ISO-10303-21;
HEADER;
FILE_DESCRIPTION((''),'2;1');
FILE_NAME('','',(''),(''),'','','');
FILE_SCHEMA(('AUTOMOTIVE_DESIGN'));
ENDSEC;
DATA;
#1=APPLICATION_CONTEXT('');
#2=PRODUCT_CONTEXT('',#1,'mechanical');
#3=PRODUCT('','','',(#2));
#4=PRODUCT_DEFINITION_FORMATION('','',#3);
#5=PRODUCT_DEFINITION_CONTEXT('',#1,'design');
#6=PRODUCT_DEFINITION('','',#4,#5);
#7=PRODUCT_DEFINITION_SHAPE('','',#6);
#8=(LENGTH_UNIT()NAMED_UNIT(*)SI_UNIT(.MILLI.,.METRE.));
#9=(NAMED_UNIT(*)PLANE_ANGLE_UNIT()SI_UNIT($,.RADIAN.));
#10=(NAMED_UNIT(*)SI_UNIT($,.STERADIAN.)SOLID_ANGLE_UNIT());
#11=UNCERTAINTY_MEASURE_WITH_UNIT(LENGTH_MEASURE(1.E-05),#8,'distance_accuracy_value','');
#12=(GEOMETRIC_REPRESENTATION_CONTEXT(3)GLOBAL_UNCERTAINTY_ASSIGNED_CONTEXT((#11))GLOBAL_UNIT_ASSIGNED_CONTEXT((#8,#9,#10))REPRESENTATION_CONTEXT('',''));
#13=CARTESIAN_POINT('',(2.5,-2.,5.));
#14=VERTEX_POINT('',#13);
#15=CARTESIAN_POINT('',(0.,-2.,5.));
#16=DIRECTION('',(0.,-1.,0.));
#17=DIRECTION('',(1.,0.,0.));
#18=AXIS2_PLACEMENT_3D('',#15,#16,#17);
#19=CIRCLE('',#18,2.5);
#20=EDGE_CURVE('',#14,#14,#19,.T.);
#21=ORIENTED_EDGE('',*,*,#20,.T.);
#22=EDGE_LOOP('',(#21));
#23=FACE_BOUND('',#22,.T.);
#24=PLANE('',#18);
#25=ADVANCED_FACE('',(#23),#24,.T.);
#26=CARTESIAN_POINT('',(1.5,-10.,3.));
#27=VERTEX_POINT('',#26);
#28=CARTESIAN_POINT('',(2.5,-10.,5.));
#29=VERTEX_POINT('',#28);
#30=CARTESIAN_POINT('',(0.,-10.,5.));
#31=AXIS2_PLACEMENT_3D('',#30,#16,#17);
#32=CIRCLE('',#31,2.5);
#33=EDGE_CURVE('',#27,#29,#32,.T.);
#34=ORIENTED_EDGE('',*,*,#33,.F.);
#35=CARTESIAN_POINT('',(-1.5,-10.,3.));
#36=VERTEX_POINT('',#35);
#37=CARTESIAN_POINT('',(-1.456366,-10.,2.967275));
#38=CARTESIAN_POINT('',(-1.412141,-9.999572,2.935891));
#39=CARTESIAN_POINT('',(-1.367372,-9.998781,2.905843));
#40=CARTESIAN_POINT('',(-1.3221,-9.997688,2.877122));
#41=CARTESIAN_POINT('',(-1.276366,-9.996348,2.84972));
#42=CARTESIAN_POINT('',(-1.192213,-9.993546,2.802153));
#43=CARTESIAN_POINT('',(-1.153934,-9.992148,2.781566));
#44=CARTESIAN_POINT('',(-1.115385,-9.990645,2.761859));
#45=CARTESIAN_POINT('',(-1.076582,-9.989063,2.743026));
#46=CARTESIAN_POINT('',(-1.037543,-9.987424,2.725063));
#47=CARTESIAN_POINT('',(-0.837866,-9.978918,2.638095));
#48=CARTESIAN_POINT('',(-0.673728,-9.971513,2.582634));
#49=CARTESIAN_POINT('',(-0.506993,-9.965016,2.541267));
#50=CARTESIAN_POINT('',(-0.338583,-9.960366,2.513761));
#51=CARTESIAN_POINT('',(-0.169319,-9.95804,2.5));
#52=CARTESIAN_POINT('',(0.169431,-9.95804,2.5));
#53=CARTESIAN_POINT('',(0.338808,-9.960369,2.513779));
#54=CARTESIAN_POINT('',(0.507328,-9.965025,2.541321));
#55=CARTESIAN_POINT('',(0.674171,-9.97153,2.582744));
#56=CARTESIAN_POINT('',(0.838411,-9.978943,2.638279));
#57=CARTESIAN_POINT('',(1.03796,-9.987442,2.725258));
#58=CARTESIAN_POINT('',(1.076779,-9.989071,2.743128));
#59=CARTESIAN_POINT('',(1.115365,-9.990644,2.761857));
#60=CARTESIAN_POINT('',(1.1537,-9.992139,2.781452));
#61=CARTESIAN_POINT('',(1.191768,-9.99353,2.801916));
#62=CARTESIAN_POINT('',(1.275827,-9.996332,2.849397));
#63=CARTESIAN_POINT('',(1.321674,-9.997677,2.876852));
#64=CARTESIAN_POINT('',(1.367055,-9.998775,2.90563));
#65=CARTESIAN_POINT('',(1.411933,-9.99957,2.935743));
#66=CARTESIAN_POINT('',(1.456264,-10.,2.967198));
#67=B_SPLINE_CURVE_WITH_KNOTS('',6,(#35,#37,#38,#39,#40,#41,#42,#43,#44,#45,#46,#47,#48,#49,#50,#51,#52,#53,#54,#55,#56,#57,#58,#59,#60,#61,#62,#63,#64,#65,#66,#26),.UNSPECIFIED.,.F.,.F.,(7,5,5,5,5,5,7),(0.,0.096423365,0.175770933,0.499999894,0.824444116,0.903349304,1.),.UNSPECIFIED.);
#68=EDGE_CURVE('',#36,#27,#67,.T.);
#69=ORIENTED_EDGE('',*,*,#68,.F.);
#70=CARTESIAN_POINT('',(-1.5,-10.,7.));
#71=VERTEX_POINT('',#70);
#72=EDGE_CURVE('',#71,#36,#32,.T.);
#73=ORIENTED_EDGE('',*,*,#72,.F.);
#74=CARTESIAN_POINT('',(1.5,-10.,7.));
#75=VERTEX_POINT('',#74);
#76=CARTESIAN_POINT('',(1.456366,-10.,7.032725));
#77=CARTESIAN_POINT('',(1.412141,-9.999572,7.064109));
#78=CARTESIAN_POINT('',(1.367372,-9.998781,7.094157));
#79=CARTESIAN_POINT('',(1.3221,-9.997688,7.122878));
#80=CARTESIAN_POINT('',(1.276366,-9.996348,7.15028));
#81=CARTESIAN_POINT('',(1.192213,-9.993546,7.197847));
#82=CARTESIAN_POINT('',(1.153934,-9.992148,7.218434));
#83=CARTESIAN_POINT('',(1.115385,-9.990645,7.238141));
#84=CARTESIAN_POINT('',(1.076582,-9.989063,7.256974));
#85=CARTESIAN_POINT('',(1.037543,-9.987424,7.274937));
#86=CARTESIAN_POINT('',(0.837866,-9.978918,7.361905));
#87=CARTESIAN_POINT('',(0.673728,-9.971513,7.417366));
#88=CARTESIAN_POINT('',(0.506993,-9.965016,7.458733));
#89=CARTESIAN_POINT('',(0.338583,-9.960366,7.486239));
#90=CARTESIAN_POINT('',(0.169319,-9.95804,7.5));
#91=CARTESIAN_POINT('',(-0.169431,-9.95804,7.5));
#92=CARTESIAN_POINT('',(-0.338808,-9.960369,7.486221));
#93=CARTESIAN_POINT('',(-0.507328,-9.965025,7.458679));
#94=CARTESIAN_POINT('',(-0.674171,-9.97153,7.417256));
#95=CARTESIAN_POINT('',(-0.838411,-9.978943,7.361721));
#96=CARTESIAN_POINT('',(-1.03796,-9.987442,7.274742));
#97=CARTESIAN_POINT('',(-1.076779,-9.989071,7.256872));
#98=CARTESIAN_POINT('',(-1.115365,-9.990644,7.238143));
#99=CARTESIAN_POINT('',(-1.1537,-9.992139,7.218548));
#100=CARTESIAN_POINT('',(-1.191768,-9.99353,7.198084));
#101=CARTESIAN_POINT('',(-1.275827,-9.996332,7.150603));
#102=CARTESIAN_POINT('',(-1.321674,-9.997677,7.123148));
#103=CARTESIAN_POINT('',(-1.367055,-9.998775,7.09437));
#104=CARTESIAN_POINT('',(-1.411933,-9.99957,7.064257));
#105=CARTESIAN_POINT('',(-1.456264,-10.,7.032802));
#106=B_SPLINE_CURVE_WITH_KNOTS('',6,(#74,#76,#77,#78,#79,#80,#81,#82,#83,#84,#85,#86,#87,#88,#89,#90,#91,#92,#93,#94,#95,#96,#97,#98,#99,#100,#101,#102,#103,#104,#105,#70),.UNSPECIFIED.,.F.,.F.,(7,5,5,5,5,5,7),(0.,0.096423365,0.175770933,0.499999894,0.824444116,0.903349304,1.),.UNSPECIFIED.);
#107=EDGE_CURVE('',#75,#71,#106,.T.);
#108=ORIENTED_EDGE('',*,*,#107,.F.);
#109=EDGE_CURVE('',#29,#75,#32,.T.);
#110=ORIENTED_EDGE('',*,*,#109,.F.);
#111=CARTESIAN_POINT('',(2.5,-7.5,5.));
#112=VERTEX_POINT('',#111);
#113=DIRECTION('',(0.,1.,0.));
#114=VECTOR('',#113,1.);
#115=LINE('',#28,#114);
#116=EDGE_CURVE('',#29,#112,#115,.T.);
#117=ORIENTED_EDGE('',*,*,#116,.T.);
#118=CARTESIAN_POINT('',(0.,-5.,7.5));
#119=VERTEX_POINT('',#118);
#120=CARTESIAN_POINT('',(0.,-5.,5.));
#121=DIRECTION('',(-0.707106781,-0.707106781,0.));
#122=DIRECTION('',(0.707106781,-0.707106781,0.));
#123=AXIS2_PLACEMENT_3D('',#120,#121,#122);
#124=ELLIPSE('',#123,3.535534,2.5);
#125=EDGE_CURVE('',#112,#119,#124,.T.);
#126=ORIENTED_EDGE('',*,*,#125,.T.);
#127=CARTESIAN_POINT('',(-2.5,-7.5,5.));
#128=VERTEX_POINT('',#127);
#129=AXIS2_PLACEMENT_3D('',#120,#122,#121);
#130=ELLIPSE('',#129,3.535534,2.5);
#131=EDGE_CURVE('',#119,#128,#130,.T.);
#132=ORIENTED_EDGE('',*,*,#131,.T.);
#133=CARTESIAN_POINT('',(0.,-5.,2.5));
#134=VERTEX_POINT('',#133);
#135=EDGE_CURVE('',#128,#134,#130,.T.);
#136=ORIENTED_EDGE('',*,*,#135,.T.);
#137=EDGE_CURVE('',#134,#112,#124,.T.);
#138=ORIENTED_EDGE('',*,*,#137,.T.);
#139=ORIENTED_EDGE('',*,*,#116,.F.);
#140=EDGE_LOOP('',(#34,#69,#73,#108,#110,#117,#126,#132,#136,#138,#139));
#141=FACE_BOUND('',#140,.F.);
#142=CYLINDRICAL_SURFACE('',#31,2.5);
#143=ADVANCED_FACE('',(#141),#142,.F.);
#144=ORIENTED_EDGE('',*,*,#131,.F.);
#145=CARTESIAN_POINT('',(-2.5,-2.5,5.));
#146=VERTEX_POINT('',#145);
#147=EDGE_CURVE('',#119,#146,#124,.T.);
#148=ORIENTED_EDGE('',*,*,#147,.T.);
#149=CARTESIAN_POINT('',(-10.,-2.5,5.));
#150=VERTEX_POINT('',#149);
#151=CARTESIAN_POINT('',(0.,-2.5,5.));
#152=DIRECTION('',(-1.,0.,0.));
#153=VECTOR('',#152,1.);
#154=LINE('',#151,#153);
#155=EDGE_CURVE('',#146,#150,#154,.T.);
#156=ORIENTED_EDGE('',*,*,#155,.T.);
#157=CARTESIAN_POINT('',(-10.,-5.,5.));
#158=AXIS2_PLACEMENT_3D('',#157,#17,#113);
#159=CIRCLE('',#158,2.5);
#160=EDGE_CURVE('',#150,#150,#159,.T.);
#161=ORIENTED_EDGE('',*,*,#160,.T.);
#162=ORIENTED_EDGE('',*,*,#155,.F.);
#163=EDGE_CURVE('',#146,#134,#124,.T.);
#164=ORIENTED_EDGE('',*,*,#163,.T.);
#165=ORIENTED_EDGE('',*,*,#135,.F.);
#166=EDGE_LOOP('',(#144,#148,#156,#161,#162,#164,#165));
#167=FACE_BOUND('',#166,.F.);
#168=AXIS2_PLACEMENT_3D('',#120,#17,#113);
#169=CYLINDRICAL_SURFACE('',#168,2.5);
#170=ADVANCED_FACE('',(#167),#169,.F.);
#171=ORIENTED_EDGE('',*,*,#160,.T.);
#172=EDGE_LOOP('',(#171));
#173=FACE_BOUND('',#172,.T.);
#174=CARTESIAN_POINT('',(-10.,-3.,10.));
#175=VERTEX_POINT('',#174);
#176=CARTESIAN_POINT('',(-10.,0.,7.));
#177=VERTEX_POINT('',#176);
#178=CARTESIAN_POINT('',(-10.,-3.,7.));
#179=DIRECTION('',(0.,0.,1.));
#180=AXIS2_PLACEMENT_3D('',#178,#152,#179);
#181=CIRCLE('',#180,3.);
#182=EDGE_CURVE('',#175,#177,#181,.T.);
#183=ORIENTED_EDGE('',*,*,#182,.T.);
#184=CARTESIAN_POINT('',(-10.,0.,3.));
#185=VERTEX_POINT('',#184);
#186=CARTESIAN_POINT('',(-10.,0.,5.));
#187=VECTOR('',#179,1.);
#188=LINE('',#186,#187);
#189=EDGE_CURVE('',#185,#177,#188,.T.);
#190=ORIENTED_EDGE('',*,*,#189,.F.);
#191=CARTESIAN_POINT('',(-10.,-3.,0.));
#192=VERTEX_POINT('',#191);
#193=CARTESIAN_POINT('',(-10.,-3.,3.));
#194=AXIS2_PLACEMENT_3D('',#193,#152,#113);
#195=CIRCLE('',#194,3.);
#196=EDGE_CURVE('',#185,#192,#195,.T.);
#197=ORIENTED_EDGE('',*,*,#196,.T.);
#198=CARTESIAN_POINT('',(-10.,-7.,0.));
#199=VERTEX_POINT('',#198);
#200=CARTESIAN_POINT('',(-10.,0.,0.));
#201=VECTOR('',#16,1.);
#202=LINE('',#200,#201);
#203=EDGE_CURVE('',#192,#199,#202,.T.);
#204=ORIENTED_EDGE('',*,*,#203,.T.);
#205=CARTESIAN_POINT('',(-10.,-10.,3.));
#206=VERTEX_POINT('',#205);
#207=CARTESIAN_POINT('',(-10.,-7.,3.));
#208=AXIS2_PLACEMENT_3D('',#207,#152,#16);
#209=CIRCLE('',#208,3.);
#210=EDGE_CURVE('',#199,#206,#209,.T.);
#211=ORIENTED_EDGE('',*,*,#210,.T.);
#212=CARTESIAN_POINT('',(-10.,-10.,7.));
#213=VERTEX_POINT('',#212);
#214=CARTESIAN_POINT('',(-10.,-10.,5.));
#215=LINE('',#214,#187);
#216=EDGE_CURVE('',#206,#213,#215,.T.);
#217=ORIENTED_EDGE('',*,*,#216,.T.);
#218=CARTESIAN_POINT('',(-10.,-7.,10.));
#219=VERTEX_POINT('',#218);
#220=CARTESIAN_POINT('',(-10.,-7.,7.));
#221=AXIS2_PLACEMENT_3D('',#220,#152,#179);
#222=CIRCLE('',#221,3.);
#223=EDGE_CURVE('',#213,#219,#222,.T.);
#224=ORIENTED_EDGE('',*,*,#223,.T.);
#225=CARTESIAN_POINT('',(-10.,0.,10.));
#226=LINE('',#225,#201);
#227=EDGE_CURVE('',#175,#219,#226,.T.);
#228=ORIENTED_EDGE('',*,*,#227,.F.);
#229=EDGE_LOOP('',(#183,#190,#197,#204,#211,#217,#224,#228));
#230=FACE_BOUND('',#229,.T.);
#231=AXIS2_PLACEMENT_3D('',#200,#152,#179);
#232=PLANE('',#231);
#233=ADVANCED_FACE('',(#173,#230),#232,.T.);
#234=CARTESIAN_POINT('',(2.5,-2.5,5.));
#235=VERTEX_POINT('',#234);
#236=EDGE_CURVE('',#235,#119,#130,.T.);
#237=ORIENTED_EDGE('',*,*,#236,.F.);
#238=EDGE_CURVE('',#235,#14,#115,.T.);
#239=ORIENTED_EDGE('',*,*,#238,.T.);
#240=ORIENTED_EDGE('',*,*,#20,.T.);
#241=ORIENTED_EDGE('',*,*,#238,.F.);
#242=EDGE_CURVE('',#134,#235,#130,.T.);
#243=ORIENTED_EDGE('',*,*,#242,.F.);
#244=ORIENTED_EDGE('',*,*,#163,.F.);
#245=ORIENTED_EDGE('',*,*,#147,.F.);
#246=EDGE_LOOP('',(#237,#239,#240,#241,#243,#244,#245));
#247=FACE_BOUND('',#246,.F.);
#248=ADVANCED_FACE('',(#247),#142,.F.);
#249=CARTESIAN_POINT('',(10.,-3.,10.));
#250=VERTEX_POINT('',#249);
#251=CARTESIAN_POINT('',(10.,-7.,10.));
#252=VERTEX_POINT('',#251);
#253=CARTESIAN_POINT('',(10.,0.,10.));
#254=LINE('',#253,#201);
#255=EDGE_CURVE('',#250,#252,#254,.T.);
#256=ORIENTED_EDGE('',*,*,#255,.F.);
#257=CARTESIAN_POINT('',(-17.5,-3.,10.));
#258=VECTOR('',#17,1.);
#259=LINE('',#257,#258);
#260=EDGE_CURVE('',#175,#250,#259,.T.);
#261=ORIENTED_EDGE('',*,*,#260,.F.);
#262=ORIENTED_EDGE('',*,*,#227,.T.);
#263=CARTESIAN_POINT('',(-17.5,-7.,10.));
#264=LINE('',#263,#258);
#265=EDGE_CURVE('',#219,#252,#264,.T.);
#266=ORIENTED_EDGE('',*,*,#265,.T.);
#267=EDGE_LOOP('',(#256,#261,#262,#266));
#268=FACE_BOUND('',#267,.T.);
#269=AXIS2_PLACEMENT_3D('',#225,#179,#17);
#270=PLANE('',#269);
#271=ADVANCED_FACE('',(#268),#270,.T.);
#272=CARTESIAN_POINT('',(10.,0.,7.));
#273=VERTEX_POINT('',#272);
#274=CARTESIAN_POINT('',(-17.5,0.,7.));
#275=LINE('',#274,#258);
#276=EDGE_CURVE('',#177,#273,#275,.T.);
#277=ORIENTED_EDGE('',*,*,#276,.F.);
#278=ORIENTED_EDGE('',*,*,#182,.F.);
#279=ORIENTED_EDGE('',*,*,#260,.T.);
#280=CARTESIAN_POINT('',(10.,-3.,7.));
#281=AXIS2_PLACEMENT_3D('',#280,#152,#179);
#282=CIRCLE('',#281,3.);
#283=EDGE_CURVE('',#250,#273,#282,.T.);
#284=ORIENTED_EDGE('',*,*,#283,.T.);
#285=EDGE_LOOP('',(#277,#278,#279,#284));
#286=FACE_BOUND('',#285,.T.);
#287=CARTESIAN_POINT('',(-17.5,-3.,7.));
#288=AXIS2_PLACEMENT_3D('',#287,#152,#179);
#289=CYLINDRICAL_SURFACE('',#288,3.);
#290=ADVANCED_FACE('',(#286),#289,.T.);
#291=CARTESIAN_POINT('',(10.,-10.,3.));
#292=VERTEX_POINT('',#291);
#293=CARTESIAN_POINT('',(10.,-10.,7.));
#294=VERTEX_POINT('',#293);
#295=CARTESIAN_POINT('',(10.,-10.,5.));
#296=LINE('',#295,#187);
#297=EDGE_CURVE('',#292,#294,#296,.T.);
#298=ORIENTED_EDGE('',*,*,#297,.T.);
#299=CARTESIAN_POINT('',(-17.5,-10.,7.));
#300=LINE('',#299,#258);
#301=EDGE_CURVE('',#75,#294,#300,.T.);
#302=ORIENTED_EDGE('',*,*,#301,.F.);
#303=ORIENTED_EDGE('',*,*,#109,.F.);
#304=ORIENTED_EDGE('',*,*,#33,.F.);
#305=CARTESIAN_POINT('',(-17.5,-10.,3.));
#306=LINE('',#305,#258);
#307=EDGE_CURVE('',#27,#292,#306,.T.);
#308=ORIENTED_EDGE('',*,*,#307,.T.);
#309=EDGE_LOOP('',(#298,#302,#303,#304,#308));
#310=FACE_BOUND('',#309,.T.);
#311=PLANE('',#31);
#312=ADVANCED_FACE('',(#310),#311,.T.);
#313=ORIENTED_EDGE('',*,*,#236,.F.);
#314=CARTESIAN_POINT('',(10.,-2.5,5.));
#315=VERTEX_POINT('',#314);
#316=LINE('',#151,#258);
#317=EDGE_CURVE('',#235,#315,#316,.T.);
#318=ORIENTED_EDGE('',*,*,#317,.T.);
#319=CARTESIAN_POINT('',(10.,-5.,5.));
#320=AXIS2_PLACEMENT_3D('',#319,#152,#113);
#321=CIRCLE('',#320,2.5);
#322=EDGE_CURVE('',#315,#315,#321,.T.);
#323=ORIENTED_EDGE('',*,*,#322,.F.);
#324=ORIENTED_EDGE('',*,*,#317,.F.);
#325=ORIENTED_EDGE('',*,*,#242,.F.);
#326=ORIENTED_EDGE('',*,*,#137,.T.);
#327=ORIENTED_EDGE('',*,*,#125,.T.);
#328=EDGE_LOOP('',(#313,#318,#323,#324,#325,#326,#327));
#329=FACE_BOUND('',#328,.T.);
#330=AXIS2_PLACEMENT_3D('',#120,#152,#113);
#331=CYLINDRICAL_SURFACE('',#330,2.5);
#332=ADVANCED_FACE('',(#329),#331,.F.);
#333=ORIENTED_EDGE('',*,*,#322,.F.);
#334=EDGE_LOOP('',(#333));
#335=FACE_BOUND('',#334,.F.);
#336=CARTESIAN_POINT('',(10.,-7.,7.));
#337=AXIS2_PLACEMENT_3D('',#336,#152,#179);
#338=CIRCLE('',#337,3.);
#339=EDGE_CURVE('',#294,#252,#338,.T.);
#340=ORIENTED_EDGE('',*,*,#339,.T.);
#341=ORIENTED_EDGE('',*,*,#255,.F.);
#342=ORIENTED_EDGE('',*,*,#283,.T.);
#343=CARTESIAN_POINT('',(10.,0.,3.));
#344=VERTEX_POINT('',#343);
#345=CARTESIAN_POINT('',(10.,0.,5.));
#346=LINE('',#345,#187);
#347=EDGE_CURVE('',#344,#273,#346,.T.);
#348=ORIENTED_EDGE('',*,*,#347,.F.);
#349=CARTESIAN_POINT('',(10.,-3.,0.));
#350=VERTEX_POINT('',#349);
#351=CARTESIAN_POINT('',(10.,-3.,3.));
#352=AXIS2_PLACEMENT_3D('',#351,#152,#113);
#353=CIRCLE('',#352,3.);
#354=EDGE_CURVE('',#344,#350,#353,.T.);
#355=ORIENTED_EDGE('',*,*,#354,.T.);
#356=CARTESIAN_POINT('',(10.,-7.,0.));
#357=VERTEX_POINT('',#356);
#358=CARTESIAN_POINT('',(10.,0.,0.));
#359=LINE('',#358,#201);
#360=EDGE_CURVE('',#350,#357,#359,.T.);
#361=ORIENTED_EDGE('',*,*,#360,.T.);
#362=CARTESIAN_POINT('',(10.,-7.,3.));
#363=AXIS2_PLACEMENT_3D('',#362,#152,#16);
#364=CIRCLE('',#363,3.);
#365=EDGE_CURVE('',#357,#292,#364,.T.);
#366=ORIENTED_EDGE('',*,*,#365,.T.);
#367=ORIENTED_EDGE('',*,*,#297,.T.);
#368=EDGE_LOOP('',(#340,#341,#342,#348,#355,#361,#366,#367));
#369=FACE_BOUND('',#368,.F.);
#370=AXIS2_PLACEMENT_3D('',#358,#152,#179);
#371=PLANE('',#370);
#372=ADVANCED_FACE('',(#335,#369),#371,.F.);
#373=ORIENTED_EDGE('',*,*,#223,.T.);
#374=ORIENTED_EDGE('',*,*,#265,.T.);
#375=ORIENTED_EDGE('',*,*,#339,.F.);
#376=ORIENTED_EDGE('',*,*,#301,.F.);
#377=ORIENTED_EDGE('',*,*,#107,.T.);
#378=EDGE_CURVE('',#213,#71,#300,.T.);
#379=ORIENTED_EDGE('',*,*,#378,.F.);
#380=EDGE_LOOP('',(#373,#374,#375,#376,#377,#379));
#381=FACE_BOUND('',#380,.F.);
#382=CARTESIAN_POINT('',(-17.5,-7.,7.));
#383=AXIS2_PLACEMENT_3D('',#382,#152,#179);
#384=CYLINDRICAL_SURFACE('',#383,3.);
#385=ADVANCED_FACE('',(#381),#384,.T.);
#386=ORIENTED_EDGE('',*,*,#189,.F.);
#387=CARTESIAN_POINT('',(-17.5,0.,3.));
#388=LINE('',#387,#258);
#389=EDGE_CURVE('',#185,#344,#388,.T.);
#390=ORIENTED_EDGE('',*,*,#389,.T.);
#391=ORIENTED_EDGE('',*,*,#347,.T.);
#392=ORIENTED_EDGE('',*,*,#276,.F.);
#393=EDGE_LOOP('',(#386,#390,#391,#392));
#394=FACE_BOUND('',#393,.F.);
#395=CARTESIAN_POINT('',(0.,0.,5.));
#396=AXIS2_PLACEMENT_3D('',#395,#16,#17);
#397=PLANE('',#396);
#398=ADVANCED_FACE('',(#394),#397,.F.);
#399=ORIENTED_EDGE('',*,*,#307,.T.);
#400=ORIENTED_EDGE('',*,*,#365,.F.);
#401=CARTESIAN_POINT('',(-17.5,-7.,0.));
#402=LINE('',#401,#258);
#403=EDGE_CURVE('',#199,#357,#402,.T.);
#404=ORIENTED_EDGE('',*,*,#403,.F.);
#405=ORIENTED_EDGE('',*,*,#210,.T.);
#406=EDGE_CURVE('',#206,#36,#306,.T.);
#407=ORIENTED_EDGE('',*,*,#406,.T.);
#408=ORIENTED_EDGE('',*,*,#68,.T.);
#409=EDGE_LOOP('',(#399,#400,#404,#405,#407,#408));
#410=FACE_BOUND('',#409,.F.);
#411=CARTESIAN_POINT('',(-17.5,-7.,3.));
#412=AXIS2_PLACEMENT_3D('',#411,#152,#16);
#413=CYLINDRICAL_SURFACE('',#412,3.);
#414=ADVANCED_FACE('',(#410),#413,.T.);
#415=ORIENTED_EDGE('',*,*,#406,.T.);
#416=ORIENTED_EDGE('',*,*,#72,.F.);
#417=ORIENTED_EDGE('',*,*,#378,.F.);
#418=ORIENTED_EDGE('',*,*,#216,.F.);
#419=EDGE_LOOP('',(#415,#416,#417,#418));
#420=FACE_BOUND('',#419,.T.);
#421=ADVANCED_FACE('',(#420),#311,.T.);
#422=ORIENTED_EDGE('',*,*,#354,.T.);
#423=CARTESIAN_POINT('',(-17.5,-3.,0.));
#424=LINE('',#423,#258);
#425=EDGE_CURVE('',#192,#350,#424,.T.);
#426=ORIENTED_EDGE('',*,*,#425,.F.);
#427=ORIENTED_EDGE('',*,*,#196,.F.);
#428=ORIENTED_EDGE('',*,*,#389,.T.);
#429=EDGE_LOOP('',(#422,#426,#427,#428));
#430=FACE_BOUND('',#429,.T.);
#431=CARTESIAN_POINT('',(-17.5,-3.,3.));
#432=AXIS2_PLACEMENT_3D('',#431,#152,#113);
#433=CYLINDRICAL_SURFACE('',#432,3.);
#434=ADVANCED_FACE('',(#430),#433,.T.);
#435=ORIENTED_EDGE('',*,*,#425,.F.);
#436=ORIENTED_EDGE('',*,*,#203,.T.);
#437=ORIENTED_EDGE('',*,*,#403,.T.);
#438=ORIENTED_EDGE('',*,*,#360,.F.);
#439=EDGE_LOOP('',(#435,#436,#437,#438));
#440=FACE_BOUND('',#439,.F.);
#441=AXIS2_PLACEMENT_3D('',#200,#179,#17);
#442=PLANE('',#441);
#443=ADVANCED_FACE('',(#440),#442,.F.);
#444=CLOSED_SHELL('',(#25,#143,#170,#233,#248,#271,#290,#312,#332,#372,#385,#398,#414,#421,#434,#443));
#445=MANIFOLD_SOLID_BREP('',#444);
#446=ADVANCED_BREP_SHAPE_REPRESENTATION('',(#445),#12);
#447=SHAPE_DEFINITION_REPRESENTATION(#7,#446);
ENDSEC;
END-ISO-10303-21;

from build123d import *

# Parameters (mm, degrees)
F0_W          = 20
F0_H          = 10
F1_DEPTH      = 10
F2_R          = 2.5
F3_DEPTH      = 8
F4_R          = 2.5
F5_DEPTH      = 10.001
F5_DEPTH_BACK = 10.001
F6_T1_DEPTH   = 35


# Not quite as in the source:
# - a fillet or chamfer that OpenCascade refuses, or shapes differently, is made with other operations: its cross-section is extruded or revolved along the edge and cut away or added


with BuildPart() as f1:
    # F0 (on Front) → F1 (new body)
    with BuildSketch(Plane.XZ):
        with Locations((0, 5)):
            Rectangle(F0_W, F0_H)
    extrude(amount=F1_DEPTH)

    # F2 (on face) → F3 (cut)
    with BuildSketch(Plane.XZ.offset(10)):
        with Locations((0, 5)):
            Circle(F2_R)
    extrude(amount=-F3_DEPTH, mode=Mode.SUBTRACT)

    # F4 (on Right) → F5 (cut, two sides)
    with BuildSketch(Plane.YZ) as f5_sk:
        with Locations((-5, 5)):
            Circle(F4_R)
    extrude(amount=-F5_DEPTH, mode=Mode.SUBTRACT)
    extrude(f5_sk.sketch, amount=F5_DEPTH_BACK, mode=Mode.SUBTRACT)

    # F6: fillet of radius 3 on 4 edges, made by hand

    # F6_s2 → F6_t1 (cut)
    with BuildSketch(Plane.YZ.offset(-17.5)):
        with BuildLine():
            ThreePointArc((-3, 10), (-0.8786796564, 9.1213203436), (0, 7))
            Line((0, 7), (0, 10))
            Line((0, 10), (-3, 10))
        make_face()
        with BuildLine():
            ThreePointArc((-7, 10), (-9.1213203436, 9.1213203436), (-10, 7))
            Line((-10, 7), (-10, 10))
            Line((-10, 10), (-7, 10))
        make_face()
        with BuildLine():
            ThreePointArc((-10, 3), (-9.1213203436, 0.8786796564), (-7, 0))
            Line((-7, 0), (-10, 0))
            Line((-10, 0), (-10, 3))
        make_face()
        with BuildLine():
            ThreePointArc((0, 3), (-0.8786796564, 0.8786796564), (-3, 0))
            Line((-3, 0), (0, 0))
            Line((0, 0), (0, 3))
        make_face()
    extrude(amount=F6_T1_DEPTH, mode=Mode.SUBTRACT)


solid = f1.part
